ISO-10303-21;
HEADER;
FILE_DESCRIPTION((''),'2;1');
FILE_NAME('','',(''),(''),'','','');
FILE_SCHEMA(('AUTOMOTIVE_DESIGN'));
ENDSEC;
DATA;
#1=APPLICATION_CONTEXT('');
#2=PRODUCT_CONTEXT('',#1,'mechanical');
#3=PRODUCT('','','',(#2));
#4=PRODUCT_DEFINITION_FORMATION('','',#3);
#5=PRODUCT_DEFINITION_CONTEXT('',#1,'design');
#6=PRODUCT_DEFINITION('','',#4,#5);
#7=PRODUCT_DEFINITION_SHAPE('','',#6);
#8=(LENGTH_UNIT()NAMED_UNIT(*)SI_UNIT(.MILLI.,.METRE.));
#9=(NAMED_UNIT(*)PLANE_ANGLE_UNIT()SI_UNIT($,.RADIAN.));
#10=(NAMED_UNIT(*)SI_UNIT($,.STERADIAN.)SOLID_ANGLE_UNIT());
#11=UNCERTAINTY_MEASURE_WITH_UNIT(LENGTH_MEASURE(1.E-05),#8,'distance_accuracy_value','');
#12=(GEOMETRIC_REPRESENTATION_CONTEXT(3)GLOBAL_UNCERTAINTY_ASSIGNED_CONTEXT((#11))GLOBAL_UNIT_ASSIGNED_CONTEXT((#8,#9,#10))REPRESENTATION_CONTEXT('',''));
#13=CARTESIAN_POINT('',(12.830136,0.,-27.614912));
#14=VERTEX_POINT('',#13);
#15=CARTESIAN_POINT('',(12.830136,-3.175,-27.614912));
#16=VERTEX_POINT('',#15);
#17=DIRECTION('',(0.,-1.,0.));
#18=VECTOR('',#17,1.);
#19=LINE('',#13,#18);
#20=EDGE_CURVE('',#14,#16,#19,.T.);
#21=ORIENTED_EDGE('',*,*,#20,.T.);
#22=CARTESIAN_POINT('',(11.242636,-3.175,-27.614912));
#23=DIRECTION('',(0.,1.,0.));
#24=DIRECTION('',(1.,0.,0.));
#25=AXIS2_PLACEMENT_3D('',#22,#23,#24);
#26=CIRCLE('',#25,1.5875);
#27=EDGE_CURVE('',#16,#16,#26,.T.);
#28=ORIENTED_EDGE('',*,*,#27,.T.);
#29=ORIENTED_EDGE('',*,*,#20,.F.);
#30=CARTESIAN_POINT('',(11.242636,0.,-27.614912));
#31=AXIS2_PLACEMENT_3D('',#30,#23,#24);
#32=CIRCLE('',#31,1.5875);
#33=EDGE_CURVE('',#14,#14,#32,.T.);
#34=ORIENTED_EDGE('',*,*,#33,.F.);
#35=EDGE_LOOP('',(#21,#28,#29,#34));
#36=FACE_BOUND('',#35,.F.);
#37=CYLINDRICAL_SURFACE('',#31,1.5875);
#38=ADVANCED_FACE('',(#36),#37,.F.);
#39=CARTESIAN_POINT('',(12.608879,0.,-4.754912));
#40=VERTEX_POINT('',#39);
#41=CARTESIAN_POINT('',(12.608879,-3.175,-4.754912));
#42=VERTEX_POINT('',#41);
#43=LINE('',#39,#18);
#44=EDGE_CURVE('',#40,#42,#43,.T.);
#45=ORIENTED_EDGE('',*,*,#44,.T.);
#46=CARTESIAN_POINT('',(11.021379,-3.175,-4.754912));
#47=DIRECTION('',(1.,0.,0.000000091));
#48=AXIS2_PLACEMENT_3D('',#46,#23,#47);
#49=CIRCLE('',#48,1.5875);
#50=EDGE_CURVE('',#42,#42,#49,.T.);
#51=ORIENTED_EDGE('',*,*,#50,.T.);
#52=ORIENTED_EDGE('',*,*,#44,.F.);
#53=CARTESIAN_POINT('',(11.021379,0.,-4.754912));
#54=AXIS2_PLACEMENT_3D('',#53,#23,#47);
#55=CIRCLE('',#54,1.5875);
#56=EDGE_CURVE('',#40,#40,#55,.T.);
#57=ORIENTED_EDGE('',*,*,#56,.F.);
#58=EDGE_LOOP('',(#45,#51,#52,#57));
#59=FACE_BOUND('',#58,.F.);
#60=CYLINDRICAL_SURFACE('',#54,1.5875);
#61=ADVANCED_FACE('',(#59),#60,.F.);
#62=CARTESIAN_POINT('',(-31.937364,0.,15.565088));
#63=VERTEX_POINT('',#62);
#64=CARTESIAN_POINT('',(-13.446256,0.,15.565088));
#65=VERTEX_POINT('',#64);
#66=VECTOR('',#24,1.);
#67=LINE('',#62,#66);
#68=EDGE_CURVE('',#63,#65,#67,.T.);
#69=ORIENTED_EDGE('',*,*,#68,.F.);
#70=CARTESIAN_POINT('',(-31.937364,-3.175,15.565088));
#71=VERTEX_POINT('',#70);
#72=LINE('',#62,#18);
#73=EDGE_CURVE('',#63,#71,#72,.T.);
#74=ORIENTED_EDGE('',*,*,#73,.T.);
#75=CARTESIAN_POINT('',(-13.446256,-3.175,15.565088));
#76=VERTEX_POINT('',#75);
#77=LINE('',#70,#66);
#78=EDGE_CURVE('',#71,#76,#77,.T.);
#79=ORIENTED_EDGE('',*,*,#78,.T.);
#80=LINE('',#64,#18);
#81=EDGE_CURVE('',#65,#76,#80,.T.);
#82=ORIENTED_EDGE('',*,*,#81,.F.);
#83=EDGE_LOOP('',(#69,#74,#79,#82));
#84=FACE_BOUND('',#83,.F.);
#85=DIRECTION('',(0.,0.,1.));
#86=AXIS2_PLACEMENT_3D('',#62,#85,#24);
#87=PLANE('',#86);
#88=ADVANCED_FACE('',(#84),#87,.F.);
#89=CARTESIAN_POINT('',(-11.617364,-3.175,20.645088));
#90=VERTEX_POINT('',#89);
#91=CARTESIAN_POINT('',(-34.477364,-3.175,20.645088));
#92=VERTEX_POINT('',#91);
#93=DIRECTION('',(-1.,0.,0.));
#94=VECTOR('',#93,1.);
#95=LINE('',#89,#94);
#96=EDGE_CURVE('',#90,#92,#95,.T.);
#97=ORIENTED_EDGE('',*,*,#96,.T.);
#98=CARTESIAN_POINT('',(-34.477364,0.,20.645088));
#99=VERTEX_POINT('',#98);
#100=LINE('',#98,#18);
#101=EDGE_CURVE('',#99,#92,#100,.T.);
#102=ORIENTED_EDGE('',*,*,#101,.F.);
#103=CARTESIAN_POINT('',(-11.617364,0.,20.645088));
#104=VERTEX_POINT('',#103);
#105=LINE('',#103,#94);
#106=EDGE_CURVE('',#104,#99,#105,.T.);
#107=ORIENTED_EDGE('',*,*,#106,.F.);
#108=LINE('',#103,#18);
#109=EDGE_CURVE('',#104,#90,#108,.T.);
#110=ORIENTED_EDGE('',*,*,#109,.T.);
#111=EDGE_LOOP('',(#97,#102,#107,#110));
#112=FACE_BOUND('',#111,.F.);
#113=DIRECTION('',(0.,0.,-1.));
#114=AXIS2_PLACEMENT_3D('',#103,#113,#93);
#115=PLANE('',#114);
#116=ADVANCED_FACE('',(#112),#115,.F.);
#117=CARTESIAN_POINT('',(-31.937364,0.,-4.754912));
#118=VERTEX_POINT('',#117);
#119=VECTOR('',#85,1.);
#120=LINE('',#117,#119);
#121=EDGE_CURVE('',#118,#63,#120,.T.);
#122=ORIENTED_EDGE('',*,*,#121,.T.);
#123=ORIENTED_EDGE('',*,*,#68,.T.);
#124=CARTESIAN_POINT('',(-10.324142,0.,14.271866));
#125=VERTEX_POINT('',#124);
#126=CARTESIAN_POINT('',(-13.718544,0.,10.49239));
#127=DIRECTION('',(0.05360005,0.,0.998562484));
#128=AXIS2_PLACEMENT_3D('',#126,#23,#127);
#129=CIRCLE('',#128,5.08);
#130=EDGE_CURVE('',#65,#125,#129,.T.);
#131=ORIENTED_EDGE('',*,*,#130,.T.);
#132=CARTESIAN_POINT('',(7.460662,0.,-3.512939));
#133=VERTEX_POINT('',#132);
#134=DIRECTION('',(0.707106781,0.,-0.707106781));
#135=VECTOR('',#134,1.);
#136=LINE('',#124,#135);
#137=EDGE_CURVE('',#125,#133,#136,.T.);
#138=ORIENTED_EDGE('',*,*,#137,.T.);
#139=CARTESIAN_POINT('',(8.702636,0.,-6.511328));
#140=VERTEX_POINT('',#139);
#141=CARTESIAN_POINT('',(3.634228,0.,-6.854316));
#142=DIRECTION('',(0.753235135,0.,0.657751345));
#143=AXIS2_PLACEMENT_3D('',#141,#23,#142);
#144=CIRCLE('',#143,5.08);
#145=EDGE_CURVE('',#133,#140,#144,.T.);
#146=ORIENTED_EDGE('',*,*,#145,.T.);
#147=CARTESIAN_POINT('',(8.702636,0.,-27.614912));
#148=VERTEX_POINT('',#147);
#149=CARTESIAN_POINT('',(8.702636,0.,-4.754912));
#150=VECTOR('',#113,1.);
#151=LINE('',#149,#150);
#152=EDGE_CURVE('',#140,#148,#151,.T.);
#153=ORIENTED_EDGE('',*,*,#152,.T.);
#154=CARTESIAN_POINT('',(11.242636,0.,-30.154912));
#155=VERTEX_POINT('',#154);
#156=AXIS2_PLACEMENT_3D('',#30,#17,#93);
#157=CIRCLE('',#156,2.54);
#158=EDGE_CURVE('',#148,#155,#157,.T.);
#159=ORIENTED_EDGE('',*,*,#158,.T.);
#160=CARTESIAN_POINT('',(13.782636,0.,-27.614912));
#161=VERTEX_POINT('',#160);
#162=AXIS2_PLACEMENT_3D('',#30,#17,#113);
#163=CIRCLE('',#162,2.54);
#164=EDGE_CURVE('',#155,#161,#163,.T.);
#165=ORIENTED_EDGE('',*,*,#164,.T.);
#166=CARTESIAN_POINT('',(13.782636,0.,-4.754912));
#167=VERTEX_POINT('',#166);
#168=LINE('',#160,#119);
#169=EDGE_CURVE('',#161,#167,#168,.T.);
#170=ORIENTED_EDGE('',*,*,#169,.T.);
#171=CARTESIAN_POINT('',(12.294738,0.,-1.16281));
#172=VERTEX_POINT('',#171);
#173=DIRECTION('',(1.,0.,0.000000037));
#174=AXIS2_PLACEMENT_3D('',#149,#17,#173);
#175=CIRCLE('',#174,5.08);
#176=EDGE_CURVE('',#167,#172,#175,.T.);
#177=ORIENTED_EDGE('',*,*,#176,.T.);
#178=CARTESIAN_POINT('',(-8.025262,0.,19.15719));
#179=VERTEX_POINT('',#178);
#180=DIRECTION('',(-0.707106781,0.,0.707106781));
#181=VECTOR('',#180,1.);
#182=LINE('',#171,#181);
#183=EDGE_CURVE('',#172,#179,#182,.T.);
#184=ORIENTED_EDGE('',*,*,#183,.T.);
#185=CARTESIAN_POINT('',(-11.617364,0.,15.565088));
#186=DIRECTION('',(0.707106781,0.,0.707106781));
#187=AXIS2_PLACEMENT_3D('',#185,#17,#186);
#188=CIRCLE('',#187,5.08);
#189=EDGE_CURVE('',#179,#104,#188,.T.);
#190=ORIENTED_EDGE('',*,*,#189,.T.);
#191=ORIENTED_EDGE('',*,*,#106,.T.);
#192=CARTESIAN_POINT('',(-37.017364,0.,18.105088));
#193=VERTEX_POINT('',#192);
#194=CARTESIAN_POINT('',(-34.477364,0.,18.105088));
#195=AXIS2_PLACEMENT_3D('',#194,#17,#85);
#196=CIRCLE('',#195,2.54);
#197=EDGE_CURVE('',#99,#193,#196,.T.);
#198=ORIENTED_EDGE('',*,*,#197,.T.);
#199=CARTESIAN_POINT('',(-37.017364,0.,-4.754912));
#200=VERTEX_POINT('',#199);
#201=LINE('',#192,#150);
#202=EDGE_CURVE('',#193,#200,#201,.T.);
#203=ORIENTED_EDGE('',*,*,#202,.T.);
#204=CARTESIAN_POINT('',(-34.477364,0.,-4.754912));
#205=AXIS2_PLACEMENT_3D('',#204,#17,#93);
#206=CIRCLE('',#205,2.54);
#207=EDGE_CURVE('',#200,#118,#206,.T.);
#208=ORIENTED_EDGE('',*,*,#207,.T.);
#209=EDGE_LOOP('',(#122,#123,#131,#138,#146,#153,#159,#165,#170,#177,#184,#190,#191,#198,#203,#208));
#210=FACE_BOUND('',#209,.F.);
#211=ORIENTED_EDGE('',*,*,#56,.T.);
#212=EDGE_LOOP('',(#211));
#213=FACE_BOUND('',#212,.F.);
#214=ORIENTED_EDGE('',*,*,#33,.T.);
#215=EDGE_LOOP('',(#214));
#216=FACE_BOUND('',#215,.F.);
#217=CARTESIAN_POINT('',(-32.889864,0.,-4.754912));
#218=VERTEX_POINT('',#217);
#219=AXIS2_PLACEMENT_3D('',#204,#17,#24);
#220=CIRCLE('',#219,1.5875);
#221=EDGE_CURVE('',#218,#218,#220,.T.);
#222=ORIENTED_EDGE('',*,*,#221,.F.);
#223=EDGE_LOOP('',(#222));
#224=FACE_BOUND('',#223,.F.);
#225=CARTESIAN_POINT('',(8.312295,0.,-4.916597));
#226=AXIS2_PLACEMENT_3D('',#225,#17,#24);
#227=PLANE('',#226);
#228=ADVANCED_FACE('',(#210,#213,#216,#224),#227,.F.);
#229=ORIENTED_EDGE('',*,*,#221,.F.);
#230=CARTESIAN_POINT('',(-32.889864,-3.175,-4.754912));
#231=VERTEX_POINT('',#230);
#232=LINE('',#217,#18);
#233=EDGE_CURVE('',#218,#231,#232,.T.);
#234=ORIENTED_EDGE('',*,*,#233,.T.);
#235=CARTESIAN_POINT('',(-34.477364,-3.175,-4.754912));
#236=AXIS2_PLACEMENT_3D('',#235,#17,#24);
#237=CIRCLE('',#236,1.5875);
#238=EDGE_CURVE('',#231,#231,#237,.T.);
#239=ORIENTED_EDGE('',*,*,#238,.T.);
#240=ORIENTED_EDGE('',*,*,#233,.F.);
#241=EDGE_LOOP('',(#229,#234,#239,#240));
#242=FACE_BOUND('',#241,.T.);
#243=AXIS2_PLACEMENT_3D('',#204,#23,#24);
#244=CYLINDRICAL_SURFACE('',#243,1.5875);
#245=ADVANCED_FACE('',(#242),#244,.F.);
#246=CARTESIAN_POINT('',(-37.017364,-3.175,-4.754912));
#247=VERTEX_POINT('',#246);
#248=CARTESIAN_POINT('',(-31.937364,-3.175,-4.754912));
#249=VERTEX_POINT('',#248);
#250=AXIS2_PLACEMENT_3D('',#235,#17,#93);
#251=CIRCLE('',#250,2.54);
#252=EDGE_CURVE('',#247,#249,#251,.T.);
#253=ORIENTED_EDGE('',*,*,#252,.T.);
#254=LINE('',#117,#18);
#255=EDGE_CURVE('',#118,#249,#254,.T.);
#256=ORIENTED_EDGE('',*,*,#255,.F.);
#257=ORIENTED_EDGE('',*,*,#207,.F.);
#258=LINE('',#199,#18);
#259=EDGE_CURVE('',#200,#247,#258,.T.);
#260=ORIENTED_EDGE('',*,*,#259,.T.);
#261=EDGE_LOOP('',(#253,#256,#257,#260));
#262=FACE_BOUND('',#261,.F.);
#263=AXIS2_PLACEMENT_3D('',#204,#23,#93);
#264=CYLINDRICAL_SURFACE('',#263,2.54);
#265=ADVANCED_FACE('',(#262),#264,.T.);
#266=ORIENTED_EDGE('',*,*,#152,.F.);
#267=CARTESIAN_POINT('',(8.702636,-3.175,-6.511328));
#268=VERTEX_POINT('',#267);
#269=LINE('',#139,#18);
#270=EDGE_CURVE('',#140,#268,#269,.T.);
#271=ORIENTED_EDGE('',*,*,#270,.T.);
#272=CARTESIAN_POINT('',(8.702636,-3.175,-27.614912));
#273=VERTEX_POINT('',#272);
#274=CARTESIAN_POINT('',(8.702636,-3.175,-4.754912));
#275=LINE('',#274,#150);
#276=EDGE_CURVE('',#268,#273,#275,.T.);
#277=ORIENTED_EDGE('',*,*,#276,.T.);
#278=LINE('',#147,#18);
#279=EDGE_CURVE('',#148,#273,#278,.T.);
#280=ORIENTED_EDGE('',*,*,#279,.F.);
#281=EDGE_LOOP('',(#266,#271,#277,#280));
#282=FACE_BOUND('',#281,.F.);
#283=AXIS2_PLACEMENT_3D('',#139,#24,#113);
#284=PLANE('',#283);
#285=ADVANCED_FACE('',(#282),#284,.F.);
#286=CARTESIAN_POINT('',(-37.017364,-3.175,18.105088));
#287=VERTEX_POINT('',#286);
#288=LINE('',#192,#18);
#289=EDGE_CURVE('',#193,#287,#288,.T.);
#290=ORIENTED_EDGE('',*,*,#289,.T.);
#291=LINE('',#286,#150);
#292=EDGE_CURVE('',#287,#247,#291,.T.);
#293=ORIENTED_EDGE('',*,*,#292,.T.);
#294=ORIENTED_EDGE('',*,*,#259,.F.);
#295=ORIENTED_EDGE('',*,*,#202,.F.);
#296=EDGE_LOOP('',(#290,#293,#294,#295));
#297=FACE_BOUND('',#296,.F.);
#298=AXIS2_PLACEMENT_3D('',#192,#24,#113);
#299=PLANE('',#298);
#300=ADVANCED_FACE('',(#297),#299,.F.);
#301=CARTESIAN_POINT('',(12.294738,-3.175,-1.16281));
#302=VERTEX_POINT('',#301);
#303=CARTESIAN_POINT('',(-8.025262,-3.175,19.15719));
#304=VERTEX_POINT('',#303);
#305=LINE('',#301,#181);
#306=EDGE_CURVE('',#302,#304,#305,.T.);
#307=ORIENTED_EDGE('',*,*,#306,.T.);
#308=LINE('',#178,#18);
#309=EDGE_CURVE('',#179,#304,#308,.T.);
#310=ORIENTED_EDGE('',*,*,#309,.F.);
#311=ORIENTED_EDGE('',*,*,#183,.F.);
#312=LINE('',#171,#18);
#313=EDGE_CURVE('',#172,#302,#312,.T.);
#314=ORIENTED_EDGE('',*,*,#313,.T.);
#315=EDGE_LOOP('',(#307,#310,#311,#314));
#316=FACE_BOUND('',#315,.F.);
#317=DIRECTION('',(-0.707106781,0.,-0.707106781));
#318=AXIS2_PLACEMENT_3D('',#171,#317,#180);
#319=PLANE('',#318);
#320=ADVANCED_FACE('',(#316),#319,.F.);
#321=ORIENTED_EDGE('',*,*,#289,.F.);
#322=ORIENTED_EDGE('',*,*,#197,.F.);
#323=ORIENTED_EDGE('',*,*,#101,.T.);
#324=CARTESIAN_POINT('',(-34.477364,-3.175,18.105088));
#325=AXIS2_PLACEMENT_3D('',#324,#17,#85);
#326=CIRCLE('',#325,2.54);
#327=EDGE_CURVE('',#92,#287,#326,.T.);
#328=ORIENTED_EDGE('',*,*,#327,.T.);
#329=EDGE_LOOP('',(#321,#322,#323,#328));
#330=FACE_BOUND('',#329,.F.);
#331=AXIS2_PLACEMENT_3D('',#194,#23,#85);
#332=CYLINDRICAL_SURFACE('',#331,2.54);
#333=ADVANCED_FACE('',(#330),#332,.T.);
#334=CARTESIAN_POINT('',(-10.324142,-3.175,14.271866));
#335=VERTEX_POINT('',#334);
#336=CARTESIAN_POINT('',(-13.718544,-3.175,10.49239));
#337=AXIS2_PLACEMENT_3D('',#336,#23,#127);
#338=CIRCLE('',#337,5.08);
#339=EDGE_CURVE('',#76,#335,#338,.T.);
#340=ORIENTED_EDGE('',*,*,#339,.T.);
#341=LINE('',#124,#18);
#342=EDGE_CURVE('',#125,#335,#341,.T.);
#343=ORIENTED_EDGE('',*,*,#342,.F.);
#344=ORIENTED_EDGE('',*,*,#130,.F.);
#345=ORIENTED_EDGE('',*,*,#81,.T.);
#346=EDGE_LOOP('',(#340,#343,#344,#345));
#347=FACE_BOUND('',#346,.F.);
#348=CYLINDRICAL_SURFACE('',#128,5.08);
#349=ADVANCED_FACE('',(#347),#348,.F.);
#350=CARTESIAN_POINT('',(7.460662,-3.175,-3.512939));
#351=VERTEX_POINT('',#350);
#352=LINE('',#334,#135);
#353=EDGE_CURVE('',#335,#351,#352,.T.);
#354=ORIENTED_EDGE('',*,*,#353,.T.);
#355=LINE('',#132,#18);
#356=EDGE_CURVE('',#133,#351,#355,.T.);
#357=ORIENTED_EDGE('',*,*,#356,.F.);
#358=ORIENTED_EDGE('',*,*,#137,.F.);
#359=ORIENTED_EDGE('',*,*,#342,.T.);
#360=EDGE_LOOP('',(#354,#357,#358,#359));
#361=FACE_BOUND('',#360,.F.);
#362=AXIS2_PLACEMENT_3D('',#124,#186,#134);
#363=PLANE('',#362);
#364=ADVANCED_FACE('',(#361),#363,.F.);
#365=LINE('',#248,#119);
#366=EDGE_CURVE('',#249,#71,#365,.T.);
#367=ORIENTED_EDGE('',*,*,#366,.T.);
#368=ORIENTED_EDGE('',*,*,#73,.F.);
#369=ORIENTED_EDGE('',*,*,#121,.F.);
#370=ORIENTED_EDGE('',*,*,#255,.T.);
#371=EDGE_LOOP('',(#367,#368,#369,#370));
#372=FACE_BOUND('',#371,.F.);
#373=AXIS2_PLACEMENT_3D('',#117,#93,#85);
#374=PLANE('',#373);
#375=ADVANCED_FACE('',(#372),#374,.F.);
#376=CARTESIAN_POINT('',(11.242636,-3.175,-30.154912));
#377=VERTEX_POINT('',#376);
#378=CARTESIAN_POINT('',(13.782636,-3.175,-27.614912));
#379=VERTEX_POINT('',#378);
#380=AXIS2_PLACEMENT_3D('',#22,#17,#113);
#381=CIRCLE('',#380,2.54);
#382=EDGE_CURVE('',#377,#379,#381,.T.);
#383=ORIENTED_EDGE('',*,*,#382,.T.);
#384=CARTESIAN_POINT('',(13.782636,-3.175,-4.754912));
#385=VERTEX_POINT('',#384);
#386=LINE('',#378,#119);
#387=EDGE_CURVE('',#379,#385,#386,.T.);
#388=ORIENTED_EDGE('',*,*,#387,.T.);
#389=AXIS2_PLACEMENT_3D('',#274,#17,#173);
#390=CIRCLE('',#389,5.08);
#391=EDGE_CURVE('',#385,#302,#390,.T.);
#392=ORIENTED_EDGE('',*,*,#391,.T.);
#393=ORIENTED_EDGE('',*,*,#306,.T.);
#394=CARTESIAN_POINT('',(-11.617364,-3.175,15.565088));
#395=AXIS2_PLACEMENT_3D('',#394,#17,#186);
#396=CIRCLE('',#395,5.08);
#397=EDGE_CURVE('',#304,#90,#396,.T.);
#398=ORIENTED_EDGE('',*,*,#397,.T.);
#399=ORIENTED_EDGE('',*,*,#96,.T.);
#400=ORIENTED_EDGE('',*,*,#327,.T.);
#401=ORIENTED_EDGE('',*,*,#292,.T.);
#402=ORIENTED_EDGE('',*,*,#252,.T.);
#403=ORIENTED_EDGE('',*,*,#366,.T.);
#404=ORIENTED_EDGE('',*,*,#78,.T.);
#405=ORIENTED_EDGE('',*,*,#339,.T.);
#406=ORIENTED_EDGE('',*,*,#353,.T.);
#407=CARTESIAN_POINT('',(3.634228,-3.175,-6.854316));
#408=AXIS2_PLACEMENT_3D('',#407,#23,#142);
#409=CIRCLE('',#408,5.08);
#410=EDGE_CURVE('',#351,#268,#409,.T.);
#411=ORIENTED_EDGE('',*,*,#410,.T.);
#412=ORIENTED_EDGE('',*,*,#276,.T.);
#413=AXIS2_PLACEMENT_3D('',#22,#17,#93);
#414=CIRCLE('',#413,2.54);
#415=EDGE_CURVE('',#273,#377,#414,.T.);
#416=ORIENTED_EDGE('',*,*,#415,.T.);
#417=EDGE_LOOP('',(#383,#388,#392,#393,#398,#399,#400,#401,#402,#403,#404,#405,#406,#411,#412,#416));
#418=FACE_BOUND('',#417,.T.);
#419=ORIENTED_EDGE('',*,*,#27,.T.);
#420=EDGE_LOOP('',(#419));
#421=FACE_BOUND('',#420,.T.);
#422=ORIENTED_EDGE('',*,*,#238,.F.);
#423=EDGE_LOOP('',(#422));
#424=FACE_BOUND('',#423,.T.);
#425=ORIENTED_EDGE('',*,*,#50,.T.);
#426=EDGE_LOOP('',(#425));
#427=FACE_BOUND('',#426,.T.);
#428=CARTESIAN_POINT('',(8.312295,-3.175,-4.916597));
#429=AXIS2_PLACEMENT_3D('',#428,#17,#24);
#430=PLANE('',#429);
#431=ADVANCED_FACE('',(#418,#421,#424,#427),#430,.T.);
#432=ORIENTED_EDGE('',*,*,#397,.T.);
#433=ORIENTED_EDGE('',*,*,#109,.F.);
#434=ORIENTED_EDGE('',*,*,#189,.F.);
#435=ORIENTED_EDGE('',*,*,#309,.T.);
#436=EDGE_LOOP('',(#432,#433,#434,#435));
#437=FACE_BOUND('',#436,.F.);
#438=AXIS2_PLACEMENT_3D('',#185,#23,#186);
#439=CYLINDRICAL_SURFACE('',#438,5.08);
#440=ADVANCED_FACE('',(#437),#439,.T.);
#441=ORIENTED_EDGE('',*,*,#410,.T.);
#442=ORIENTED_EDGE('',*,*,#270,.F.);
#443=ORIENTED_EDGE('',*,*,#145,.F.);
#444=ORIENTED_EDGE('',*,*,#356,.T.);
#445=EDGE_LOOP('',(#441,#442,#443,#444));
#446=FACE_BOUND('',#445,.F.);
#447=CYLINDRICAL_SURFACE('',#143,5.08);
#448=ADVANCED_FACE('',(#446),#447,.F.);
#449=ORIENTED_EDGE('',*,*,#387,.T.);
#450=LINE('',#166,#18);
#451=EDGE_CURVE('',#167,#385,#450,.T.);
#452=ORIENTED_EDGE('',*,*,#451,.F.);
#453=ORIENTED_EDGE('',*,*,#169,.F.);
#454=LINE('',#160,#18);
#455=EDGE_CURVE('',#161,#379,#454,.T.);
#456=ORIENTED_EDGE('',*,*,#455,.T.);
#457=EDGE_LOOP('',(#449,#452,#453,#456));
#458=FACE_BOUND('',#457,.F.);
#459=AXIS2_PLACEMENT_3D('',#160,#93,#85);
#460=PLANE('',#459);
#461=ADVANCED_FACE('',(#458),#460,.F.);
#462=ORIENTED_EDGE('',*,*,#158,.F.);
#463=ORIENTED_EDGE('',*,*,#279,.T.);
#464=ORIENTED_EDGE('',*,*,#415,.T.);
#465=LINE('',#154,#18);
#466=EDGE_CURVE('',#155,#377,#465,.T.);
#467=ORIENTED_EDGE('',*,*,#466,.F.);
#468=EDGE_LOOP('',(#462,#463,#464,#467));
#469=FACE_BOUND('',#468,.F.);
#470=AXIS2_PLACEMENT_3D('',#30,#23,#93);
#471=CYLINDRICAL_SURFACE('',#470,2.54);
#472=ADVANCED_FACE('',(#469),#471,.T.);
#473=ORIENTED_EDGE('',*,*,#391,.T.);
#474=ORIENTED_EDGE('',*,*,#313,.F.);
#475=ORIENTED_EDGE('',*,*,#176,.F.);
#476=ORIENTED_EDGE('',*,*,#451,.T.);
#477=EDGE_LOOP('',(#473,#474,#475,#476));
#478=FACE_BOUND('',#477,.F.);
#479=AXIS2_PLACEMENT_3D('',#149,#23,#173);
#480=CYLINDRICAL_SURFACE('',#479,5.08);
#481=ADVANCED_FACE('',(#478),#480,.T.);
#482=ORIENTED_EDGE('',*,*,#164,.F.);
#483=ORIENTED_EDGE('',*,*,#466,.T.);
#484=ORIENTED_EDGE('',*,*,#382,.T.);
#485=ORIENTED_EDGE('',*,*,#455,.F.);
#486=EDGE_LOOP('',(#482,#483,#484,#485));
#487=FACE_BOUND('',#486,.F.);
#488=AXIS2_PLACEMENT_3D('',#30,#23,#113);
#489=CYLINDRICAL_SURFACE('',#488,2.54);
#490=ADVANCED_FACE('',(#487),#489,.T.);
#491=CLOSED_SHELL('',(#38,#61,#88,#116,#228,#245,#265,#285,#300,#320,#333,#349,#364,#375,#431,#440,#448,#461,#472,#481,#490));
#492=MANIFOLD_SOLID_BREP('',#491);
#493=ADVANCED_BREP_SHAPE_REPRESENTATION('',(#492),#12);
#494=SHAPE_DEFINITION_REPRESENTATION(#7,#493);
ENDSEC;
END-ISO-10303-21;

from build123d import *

# Parameters (mm, degrees)
F0_R     = 1.5875
F1_DEPTH = 3.175


# Not quite as in the source:
# - ends of sketch curves that miss each other by under 0.0002 mm in the source are joined
# - a feature names something its author has since deleted; it is built from what else it names


with BuildPart() as f1:
    # F0 (on Front) → F1 (new body)
    with BuildSketch(Plane.XZ):
        with BuildLine():
            Line((8.7026358494, -4.754912237), (7.4606623464, -3.512938734))
            ThreePointArc((7.4606623464, -3.512938734), (8.3275358886, -4.9102837361), (8.7026358494, -6.5113280243))
            Line((8.7026358494, -6.5113280243), (8.7026358494, -4.754912237))
        make_face()
        with BuildLine():
            Line((-10.3241423466, 14.271865959), (-11.6173641506, 15.565087763))
            Line((-11.6173641506, 15.565087763), (-13.4462559649, 15.565087763))
            ThreePointArc((-13.4462559649, 15.565087763), (-11.774512383, 15.185698369), (-10.3241423466, 14.271865959))
        make_face()
        with BuildLine():
            ThreePointArc((-8.0252617022, 19.1571902114), (-9.6733323142, 20.2583957881), (-11.6173641506, 20.645087763))
            Line((-11.6173641506, 20.645087763), (-11.6173641506, 15.565087763))
            Line((-11.6173641506, 15.565087763), (-8.0252617022, 19.1571902114))
        make_face()
        with BuildLine():
            ThreePointArc((13.7826358494, -4.7549120495), (13.3959438387, -2.810880314), (12.2947382978, -1.1628097886))
            Line((12.2947382978, -1.1628097886), (8.7026358494, -4.754912237))
            Line((8.7026358494, -4.754912237), (9.4338794152, -4.75491221))
            ThreePointArc((9.4338794152, -4.75491221), (11.0213794287, -3.167412237), (12.6088794152, -4.754912237))
            Line((12.6088794152, -4.754912237), (13.7826358494, -4.7549120495))
        make_face()
        with BuildLine():
            ThreePointArc((-34.4773641506, 20.645087763), (-36.2734153748, 19.9011389872), (-37.0173641506, 18.105087763))
            Line((-37.0173641506, 18.105087763), (-37.0173641506, -4.754912237))
            ThreePointArc((-37.0173641506, -4.754912237), (-34.4773641506, -7.294912237), (-31.9373641506, -4.754912237))
            Line((-31.9373641506, -4.754912237), (-31.9373641506, 13.025087763))
            Line((-31.9373641506, 13.025087763), (-31.9373641506, 15.565087763))
            Line((-31.9373641506, 15.565087763), (-31.9373641506, 20.645087763))
            Line((-31.9373641506, 20.645087763), (-34.4773641506, 20.645087763))
        make_face()
        with Locations((-34.4773641506, -4.754912237)):
            Circle(F0_R, mode=Mode.SUBTRACT)
        Polygon((-11.6173641506, 20.645087763), (-31.9373641506, 20.645087763), (-31.9373641506, 15.565087763), (-29.3973641506, 15.565087763), (-13.4462559649, 15.565087763), (-11.6173641506, 15.565087763), align=None)
        with BuildLine():
            ThreePointArc((11.2426358494, -30.154912237), (13.0386870736, -29.4109634612), (13.7826358494, -27.614912237))
            Line((13.7826358494, -27.614912237), (12.8301358494, -27.614912237))
            ThreePointArc((12.8301358494, -27.614912237), (11.2426358494, -29.202412237), (9.6551358494, -27.614912237))
            Line((9.6551358494, -27.614912237), (8.7026358494, -27.614912237))
            ThreePointArc((8.7026358494, -27.614912237), (9.4465846252, -29.4109634612), (11.2426358494, -30.154912237))
        make_face()
        with BuildLine():
            Line((9.4338794152, -4.75491221), (8.7026358494, -4.754912237))
            Line((8.7026358494, -4.754912237), (8.7026358494, -6.5113280243))
            Line((8.7026358494, -6.5113280243), (8.7026358494, -27.614912237))
            Line((8.7026358494, -27.614912237), (9.6551358494, -27.614912237))
            ThreePointArc((9.6551358494, -27.614912237), (11.2426358494, -26.027412237), (12.8301358494, -27.614912237))
            Line((12.8301358494, -27.614912237), (13.7826358494, -27.614912237))
            Line((13.7826358494, -27.614912237), (13.7826358494, -4.7549120495))
            Line((13.7826358494, -4.7549120495), (12.6088794152, -4.7549120928))
            ThreePointArc((12.6088794152, -4.7549120928), (11.0213794017, -6.342412237), (9.4338794152, -4.75491221))
        make_face()
        Polygon((-8.0252617022, 19.1571902114), (-11.6173641506, 15.565087763), (-10.3241423466, 14.271865959), (7.4606623464, -3.512938734), (8.7026358494, -4.754912237), (12.2947382978, -1.1628097886), align=None)
    extrude(amount=F1_DEPTH)


solid = f1.part
